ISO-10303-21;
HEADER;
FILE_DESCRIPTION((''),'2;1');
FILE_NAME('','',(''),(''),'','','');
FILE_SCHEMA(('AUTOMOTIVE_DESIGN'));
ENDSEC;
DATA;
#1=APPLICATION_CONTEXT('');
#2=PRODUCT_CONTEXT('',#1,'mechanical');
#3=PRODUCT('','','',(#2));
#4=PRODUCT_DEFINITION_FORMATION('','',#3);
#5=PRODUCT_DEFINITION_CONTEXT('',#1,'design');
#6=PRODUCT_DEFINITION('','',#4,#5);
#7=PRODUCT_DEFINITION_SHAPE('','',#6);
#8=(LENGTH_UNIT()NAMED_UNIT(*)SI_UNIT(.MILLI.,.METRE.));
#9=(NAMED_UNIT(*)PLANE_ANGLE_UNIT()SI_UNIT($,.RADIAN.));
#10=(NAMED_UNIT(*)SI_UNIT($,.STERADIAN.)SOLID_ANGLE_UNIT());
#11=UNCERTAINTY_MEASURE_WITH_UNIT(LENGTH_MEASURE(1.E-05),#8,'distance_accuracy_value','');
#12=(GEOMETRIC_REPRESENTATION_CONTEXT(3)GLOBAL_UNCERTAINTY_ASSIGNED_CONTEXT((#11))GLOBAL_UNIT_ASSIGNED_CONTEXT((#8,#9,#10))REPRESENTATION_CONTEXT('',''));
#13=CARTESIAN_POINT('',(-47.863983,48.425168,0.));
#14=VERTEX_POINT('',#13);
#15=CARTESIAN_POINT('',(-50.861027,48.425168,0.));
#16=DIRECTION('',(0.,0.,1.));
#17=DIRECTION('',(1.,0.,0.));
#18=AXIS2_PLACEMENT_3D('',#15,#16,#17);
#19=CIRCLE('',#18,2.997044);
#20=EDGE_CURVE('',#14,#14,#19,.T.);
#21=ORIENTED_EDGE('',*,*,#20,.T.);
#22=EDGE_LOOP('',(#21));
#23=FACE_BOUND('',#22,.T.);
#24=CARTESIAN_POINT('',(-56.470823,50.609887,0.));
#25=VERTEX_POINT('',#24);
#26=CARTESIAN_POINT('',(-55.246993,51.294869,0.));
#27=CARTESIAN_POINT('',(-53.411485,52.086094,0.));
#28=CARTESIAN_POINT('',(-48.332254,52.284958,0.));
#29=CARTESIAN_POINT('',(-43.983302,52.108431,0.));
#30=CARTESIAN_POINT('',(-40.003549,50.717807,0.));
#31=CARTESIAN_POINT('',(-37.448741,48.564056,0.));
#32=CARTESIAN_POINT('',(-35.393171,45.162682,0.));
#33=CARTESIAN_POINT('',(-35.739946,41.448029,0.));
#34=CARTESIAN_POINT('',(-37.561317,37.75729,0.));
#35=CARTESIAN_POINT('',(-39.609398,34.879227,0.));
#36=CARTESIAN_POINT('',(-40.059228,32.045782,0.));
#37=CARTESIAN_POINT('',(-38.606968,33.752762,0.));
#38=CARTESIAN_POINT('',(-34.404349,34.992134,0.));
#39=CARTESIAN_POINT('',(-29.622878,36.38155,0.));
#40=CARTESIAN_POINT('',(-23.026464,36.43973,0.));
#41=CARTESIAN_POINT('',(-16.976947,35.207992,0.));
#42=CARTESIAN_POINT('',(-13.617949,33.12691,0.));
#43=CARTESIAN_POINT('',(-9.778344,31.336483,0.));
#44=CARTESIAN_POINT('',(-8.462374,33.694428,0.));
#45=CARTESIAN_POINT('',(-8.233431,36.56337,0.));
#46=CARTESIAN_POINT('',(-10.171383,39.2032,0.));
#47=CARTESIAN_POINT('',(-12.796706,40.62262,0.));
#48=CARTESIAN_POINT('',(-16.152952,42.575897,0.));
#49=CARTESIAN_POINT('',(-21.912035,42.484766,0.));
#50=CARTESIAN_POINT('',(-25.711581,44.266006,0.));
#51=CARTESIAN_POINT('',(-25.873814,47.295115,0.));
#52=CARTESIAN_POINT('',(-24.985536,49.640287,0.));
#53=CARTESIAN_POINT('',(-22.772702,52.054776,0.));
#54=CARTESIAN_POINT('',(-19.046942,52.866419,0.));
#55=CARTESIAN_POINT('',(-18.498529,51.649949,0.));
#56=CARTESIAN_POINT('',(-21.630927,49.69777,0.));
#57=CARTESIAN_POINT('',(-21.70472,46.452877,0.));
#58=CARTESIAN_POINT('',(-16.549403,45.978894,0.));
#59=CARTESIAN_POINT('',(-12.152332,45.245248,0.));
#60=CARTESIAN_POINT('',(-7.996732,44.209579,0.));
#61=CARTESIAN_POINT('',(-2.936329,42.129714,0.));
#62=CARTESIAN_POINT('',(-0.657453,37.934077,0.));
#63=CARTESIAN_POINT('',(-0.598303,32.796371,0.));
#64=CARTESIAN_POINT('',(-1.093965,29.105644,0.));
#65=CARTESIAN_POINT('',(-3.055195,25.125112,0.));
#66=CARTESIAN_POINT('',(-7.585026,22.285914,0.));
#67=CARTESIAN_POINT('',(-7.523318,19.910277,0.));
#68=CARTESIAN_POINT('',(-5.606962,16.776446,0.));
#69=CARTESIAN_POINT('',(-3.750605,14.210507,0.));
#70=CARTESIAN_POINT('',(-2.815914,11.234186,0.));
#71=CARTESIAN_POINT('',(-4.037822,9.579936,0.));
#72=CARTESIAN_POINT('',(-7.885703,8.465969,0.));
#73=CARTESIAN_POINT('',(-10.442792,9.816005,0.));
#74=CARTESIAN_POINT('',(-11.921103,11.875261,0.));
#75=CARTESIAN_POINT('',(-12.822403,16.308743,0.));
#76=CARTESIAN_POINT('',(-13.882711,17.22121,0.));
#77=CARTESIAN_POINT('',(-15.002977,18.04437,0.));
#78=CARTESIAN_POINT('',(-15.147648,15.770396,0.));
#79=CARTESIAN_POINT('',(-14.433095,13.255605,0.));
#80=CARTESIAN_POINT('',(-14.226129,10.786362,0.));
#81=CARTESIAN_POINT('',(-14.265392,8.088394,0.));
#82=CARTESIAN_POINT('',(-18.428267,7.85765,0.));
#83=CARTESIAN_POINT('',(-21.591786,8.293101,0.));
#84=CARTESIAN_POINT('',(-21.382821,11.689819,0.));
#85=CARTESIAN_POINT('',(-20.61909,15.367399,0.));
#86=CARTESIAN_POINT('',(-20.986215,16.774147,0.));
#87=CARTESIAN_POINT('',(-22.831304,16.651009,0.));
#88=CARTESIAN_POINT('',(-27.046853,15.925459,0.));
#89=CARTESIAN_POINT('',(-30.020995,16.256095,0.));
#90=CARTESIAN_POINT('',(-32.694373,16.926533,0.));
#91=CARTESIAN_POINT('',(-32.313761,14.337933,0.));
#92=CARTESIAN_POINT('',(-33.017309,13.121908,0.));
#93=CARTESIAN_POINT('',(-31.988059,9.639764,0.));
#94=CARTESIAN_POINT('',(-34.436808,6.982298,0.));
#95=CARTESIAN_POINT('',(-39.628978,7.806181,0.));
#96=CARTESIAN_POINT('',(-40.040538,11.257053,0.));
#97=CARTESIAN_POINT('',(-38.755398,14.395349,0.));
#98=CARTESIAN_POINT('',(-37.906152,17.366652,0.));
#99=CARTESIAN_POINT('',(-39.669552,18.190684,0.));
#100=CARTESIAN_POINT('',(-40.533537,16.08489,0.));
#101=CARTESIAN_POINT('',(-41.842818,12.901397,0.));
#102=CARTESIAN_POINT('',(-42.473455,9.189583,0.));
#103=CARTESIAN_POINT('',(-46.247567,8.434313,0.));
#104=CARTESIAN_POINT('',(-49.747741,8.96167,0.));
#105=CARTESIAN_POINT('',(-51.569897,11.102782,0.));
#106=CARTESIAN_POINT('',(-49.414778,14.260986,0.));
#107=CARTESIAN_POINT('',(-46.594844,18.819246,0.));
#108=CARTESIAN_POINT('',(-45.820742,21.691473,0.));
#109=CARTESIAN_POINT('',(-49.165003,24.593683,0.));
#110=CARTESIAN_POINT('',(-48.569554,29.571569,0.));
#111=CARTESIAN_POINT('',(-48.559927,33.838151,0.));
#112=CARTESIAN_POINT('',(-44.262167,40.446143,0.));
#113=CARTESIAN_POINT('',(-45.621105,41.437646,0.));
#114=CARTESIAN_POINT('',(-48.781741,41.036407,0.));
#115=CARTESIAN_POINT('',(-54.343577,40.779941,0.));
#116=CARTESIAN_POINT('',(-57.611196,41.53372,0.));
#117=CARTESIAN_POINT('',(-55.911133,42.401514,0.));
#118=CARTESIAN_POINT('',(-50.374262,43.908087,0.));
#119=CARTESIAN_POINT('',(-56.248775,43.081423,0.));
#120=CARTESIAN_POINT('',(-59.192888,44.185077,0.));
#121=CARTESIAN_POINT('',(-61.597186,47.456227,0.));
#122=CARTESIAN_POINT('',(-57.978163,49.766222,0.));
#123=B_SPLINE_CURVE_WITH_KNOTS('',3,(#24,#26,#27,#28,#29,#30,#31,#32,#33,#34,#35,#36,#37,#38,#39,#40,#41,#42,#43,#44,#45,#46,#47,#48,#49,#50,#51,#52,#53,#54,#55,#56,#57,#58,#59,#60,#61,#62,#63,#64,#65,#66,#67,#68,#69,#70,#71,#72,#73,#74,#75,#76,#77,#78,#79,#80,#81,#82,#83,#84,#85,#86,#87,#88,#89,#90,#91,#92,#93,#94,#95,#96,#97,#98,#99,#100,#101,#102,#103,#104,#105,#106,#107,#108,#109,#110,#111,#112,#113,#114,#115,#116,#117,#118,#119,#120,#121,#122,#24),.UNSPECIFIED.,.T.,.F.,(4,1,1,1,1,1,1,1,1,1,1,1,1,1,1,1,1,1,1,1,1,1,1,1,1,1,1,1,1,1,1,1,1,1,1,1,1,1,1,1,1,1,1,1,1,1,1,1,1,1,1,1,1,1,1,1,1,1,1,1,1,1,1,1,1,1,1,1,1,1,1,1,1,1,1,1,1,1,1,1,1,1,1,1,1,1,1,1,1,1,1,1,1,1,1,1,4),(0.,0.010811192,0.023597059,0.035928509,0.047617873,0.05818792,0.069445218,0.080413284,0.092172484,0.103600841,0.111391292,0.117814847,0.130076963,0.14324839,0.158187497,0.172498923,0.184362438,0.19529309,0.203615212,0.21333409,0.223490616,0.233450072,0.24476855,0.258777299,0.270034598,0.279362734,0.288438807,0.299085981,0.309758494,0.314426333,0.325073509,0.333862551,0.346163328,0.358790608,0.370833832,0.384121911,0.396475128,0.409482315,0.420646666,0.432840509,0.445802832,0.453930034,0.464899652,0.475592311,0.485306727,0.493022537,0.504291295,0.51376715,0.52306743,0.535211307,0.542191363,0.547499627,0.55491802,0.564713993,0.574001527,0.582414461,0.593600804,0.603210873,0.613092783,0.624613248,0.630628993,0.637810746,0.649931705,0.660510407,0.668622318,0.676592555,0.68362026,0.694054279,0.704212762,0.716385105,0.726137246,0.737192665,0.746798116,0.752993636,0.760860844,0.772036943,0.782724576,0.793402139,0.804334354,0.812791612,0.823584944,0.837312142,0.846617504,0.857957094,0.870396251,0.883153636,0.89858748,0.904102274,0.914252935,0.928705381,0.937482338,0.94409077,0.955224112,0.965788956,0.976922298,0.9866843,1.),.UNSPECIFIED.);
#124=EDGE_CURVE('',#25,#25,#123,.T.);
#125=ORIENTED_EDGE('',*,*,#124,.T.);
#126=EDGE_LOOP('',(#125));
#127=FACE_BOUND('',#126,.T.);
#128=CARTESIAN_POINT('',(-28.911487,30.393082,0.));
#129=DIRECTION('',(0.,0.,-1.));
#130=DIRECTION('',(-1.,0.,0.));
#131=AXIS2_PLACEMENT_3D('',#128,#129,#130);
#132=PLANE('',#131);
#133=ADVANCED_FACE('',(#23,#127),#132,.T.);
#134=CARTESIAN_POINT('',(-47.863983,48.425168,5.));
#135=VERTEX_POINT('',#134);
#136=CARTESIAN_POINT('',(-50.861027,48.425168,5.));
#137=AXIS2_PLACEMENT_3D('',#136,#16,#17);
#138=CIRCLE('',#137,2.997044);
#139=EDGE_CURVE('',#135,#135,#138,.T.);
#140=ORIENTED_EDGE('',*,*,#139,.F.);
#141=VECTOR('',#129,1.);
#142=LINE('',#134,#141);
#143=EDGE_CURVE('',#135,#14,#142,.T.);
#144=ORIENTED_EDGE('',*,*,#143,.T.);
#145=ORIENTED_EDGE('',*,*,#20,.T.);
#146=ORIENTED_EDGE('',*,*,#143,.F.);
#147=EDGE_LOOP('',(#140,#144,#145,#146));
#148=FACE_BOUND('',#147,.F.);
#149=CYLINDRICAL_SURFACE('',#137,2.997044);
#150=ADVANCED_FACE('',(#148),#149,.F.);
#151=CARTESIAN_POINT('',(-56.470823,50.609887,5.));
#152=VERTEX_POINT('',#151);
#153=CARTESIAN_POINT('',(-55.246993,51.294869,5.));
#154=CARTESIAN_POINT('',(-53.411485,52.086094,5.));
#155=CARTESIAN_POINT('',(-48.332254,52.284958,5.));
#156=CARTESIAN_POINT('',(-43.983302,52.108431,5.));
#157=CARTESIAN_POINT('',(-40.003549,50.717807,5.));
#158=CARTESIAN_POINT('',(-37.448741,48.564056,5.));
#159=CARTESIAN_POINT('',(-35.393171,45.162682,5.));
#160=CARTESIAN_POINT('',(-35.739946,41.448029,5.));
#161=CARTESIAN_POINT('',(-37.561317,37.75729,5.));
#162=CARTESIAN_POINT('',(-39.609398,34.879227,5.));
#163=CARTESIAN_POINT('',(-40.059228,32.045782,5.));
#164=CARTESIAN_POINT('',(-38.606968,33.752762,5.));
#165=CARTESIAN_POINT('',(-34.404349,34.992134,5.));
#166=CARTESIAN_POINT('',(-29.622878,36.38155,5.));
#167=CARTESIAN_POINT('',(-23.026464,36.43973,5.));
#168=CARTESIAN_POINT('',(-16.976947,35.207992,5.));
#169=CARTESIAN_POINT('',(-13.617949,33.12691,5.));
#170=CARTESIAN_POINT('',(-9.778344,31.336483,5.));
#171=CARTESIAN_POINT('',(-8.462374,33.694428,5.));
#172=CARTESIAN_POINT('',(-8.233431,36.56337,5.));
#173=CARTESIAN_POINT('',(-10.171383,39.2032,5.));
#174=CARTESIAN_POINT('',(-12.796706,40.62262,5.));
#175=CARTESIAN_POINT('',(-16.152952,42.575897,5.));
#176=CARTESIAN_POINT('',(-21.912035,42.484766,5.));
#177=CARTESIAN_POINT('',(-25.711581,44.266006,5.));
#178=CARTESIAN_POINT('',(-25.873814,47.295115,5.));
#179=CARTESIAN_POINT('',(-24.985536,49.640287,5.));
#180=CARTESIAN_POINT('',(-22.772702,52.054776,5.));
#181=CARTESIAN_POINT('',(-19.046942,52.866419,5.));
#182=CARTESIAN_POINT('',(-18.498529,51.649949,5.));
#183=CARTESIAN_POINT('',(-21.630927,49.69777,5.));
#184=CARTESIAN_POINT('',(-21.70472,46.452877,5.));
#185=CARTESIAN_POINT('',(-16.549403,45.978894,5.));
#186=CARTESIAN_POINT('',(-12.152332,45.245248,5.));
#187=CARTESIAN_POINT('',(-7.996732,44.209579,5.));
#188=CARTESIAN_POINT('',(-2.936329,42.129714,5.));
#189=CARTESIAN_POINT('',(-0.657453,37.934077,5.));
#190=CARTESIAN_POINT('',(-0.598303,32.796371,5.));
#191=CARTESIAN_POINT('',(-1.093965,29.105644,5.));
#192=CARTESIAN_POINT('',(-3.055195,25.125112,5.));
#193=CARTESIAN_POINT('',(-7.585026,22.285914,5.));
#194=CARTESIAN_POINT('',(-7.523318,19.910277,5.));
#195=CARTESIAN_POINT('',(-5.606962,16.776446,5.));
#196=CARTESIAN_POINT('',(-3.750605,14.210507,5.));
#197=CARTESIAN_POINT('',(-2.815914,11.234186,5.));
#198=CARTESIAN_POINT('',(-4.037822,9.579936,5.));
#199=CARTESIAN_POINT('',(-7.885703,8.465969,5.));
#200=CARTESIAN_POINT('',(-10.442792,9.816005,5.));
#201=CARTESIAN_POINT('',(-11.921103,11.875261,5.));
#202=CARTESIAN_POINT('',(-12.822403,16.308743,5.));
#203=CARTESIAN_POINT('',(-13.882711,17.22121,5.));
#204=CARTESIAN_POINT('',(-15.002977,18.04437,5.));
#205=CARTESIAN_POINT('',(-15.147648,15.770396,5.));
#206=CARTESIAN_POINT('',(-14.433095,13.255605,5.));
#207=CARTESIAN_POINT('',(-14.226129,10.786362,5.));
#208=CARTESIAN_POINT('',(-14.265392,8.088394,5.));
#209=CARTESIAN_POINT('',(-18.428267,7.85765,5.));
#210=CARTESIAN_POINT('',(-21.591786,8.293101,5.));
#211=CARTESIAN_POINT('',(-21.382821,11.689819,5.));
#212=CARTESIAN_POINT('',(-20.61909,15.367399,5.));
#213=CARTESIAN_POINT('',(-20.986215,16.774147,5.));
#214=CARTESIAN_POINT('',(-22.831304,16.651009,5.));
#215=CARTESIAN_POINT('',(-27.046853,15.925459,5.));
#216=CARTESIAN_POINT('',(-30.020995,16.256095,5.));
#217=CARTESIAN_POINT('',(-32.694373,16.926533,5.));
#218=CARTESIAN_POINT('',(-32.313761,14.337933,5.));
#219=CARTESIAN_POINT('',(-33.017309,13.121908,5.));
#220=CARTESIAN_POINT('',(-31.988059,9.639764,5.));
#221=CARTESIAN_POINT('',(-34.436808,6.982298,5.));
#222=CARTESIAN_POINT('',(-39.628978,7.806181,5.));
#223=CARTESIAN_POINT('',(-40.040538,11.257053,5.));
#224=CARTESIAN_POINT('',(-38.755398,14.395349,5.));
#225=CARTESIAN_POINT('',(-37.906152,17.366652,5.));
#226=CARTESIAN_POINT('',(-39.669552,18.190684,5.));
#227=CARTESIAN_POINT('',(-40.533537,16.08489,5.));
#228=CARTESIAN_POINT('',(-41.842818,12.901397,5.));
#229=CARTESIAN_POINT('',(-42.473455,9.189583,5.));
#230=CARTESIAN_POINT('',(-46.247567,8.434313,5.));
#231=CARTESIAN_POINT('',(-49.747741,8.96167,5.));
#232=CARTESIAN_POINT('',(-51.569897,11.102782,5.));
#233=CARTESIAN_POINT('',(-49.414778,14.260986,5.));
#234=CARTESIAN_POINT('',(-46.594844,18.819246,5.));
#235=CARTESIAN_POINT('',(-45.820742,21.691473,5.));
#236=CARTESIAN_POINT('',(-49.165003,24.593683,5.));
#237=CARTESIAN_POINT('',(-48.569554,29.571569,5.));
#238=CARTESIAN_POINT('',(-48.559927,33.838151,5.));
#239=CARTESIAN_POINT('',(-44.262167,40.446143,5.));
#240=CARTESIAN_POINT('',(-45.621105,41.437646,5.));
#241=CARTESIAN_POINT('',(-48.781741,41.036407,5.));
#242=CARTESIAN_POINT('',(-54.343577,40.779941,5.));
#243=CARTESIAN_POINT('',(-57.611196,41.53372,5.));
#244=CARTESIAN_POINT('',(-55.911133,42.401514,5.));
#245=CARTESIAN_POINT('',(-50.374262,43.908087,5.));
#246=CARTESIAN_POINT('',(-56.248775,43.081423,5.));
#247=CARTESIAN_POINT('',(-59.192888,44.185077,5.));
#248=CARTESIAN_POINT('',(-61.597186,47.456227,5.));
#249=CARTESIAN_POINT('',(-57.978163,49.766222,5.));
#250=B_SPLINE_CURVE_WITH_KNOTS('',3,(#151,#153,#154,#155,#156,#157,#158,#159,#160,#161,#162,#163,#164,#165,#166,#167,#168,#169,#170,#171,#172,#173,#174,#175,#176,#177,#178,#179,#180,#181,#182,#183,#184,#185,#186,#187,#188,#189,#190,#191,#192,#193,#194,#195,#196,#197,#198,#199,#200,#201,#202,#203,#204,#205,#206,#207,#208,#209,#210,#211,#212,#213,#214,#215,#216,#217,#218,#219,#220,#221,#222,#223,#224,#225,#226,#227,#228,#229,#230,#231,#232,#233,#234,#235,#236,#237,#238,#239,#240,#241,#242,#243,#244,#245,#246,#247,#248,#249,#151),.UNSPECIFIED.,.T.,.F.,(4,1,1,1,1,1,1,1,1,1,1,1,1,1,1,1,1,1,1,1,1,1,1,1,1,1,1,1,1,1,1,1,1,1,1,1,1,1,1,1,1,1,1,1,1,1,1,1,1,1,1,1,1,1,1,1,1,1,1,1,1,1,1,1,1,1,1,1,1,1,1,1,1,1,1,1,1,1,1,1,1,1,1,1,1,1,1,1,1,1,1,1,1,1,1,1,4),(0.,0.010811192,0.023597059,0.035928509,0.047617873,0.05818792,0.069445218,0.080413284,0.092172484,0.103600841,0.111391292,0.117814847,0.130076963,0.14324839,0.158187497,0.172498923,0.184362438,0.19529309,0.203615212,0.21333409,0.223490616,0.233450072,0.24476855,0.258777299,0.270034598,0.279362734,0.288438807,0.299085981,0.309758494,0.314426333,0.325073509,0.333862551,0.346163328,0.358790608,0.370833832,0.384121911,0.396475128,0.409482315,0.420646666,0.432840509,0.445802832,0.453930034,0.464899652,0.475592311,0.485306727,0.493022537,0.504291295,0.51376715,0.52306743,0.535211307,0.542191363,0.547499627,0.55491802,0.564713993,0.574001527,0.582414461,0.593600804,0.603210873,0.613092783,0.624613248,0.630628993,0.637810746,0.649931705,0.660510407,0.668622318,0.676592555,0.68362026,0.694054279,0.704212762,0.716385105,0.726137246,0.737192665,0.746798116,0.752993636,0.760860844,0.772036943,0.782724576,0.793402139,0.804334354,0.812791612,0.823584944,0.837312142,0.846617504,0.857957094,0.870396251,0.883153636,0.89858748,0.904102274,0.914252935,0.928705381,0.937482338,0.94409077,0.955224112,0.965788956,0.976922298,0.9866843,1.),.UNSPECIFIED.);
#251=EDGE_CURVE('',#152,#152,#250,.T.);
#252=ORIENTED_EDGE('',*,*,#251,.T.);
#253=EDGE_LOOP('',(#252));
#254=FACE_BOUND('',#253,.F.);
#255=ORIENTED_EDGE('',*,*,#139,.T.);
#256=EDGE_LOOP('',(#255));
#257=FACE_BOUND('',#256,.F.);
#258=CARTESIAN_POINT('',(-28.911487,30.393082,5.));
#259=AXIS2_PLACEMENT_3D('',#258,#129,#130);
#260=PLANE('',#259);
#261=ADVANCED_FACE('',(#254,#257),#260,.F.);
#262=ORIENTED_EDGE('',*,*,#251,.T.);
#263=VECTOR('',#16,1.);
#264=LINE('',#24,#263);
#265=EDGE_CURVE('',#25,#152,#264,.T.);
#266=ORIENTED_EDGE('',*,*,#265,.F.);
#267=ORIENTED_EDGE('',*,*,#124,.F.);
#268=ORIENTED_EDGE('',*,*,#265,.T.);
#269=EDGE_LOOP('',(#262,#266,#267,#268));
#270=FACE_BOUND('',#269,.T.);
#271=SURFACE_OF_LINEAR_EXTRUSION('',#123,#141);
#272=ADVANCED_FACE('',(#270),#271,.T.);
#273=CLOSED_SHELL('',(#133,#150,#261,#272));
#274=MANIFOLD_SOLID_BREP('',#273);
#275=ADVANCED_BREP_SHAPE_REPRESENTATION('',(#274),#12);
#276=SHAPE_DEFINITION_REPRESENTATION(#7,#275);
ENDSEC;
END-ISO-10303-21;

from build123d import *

# Parameters (mm, degrees)
F1_DEPTH = 5
F2_R     = 2.9970440669
F3_DEPTH = 5


with BuildPart() as f1:
    # F0 (on Top) → F1 (new body)
    with BuildSketch(Plane.XY):
        with BuildLine():
            add(Edge.make_bspline(
                [(-56.4708225429, 50.6098866463), (-55.246993339, 51.2948686943), (-53.4114845302, 52.0860943781), (-48.3322544899, 52.28495809), (-43.9833023684, 52.1084314009), (-40.0035494073, 50.7178069938), (-37.4487411719, 48.5640558527), (-35.3931712193, 45.1626824353), (-35.7399463726, 41.4480291005), (-37.5613174183, 37.7572901602), (-39.6093979914, 34.8792265962), (-40.0592281403, 32.045782415), (-38.6069683601, 33.7527622683), (-34.4043488924, 34.9921342387), (-29.6228781061, 36.3815501843), (-23.0264638702, 36.4397302251), (-16.9769467748, 35.2079915002), (-13.6179493656, 33.1269104546), (-9.7783442876, 31.3364832835), (-8.4623735877, 33.6944284071), (-8.2334306142, 36.5633701747), (-10.171382727, 39.2032002189), (-12.7967057814, 40.6226204446), (-16.1529522793, 42.5758965002), (-21.912035404, 42.4847663705), (-25.7115813221, 44.2660060372), (-25.8738141563, 47.2951154583), (-24.9855363581, 49.640286688), (-22.7727024941, 52.0547757452), (-19.0469419629, 52.866419458), (-18.4985286074, 51.6499491482), (-21.6309266481, 49.6977701616), (-21.7047195248, 46.4528769607), (-16.5494031926, 45.9788942099), (-12.1523322258, 45.2452484045), (-7.9967322712, 44.2095792657), (-2.9363293971, 42.1297142324), (-0.6574527286, 37.9340773754), (-0.5983028567, 32.7963713646), (-1.0939654447, 29.1056443277), (-3.0551951111, 25.1251122645), (-7.5850255392, 22.285914177), (-7.5233184338, 19.9102765324), (-5.6069622415, 16.7764462133), (-3.7506047108, 14.2105071841), (-2.8159136484, 11.2341858781), (-4.0378220227, 9.5799361051), (-7.8857032758, 8.4659692933), (-10.4427919567, 9.8160050889), (-11.9211030647, 11.8752607054), (-12.8224027165, 16.3087429926), (-13.8827112132, 17.2212097626), (-15.002976695, 18.044370057), (-15.1476484626, 15.7703964263), (-14.4330947016, 13.2556050895), (-14.2261290092, 10.7863623386), (-14.2653924997, 8.0883942098), (-18.4282667818, 7.8576499568), (-21.5917860435, 8.2931009891), (-21.3828213995, 11.6898190881), (-20.6190903943, 15.3673990447), (-20.9862152931, 16.7741469409), (-22.8313035793, 16.6510085775), (-27.0468531055, 15.925459061), (-30.0209952221, 16.2560950496), (-32.6943728538, 16.9265327947), (-32.3137610334, 14.3379326524), (-33.0173094312, 13.1219082384), (-31.9880589789, 9.6397639726), (-34.4368083766, 6.9822979013), (-39.6289784986, 7.8061806875), (-40.0405379165, 11.2570529681), (-38.7553976092, 14.3953489716), (-37.9061515698, 17.3666518345), (-39.669552001, 18.1906842798), (-40.5335366688, 16.084889518), (-41.8428180441, 12.9013974083), (-42.4734549133, 9.1895834309), (-46.2475673062, 8.4343126748), (-49.7477408606, 8.9616695559), (-51.5698969354, 11.1027824253), (-49.4147782768, 14.2609859729), (-46.5948444748, 18.8192462069), (-45.8207418054, 21.6914728702), (-49.1650034274, 24.5936831002), (-48.5695540252, 29.5715685553), (-48.5599271528, 33.8381510764), (-44.2621667188, 40.4461433142), (-45.6211048272, 41.4376463183), (-48.7817412171, 41.0364074128), (-54.3435769441, 40.7799409294), (-57.6111955909, 41.5337198198), (-55.9111334334, 42.4015139195), (-50.374262171, 43.9080867979), (-56.2487753209, 43.0814227509), (-59.1928878579, 44.185076854), (-61.5971859639, 47.4562272289), (-57.9781625312, 49.7662224904), (-56.4708225429, 50.6098866463)],
                knots=[0, 0, 0, 0, 0.0108111921, 0.0235970589, 0.0359285092, 0.0476178726, 0.0581879196, 0.0694452178, 0.0804132835, 0.092172484, 0.1036008406, 0.111391292, 0.1178148466, 0.1300769625, 0.1432483904, 0.1581874966, 0.1724989233, 0.1843624384, 0.1952930897, 0.2036152116, 0.2133340897, 0.2234906162, 0.2334500716, 0.2447685498, 0.2587772994, 0.2700345976, 0.2793627338, 0.2884388069, 0.2990859805, 0.3097584944, 0.3144263331, 0.3250735087, 0.333862551, 0.3461633282, 0.3587906084, 0.3708338324, 0.3841219111, 0.3964751285, 0.4094823152, 0.4206466662, 0.432840509, 0.4458028319, 0.4539300343, 0.4648996521, 0.4755923109, 0.4853067269, 0.4930225368, 0.5042912948, 0.5137671498, 0.5230674299, 0.5352113068, 0.5421913626, 0.5474996266, 0.5549180203, 0.564713993, 0.5740015268, 0.5824144605, 0.5936008045, 0.6032108726, 0.6130927833, 0.6246132478, 0.6306289934, 0.6378107459, 0.6499317049, 0.6605104068, 0.6686223181, 0.6765925549, 0.6836202602, 0.6940542789, 0.7042127621, 0.7163851045, 0.7261372463, 0.7371926651, 0.7467981164, 0.7529936357, 0.7608608435, 0.7720369435, 0.7827245763, 0.7934021386, 0.8043343539, 0.8127916118, 0.8235849438, 0.8373121417, 0.8466175042, 0.8579570939, 0.8703962515, 0.8831536361, 0.8985874798, 0.9041022744, 0.9142529352, 0.9287053813, 0.9374823377, 0.9440907699, 0.9552241123, 0.9657889558, 0.9769222982, 0.9866843003, 1, 1, 1, 1], degree=3))
        make_face()
    extrude(amount=F1_DEPTH)

    # F2 (on face) → F3 (cut)
    with BuildSketch(Plane.XY.offset(5)):
        with Locations((-50.8610270917, 48.425167799)):
            Circle(F2_R)
    extrude(amount=-F3_DEPTH, mode=Mode.SUBTRACT)


solid = f1.part
